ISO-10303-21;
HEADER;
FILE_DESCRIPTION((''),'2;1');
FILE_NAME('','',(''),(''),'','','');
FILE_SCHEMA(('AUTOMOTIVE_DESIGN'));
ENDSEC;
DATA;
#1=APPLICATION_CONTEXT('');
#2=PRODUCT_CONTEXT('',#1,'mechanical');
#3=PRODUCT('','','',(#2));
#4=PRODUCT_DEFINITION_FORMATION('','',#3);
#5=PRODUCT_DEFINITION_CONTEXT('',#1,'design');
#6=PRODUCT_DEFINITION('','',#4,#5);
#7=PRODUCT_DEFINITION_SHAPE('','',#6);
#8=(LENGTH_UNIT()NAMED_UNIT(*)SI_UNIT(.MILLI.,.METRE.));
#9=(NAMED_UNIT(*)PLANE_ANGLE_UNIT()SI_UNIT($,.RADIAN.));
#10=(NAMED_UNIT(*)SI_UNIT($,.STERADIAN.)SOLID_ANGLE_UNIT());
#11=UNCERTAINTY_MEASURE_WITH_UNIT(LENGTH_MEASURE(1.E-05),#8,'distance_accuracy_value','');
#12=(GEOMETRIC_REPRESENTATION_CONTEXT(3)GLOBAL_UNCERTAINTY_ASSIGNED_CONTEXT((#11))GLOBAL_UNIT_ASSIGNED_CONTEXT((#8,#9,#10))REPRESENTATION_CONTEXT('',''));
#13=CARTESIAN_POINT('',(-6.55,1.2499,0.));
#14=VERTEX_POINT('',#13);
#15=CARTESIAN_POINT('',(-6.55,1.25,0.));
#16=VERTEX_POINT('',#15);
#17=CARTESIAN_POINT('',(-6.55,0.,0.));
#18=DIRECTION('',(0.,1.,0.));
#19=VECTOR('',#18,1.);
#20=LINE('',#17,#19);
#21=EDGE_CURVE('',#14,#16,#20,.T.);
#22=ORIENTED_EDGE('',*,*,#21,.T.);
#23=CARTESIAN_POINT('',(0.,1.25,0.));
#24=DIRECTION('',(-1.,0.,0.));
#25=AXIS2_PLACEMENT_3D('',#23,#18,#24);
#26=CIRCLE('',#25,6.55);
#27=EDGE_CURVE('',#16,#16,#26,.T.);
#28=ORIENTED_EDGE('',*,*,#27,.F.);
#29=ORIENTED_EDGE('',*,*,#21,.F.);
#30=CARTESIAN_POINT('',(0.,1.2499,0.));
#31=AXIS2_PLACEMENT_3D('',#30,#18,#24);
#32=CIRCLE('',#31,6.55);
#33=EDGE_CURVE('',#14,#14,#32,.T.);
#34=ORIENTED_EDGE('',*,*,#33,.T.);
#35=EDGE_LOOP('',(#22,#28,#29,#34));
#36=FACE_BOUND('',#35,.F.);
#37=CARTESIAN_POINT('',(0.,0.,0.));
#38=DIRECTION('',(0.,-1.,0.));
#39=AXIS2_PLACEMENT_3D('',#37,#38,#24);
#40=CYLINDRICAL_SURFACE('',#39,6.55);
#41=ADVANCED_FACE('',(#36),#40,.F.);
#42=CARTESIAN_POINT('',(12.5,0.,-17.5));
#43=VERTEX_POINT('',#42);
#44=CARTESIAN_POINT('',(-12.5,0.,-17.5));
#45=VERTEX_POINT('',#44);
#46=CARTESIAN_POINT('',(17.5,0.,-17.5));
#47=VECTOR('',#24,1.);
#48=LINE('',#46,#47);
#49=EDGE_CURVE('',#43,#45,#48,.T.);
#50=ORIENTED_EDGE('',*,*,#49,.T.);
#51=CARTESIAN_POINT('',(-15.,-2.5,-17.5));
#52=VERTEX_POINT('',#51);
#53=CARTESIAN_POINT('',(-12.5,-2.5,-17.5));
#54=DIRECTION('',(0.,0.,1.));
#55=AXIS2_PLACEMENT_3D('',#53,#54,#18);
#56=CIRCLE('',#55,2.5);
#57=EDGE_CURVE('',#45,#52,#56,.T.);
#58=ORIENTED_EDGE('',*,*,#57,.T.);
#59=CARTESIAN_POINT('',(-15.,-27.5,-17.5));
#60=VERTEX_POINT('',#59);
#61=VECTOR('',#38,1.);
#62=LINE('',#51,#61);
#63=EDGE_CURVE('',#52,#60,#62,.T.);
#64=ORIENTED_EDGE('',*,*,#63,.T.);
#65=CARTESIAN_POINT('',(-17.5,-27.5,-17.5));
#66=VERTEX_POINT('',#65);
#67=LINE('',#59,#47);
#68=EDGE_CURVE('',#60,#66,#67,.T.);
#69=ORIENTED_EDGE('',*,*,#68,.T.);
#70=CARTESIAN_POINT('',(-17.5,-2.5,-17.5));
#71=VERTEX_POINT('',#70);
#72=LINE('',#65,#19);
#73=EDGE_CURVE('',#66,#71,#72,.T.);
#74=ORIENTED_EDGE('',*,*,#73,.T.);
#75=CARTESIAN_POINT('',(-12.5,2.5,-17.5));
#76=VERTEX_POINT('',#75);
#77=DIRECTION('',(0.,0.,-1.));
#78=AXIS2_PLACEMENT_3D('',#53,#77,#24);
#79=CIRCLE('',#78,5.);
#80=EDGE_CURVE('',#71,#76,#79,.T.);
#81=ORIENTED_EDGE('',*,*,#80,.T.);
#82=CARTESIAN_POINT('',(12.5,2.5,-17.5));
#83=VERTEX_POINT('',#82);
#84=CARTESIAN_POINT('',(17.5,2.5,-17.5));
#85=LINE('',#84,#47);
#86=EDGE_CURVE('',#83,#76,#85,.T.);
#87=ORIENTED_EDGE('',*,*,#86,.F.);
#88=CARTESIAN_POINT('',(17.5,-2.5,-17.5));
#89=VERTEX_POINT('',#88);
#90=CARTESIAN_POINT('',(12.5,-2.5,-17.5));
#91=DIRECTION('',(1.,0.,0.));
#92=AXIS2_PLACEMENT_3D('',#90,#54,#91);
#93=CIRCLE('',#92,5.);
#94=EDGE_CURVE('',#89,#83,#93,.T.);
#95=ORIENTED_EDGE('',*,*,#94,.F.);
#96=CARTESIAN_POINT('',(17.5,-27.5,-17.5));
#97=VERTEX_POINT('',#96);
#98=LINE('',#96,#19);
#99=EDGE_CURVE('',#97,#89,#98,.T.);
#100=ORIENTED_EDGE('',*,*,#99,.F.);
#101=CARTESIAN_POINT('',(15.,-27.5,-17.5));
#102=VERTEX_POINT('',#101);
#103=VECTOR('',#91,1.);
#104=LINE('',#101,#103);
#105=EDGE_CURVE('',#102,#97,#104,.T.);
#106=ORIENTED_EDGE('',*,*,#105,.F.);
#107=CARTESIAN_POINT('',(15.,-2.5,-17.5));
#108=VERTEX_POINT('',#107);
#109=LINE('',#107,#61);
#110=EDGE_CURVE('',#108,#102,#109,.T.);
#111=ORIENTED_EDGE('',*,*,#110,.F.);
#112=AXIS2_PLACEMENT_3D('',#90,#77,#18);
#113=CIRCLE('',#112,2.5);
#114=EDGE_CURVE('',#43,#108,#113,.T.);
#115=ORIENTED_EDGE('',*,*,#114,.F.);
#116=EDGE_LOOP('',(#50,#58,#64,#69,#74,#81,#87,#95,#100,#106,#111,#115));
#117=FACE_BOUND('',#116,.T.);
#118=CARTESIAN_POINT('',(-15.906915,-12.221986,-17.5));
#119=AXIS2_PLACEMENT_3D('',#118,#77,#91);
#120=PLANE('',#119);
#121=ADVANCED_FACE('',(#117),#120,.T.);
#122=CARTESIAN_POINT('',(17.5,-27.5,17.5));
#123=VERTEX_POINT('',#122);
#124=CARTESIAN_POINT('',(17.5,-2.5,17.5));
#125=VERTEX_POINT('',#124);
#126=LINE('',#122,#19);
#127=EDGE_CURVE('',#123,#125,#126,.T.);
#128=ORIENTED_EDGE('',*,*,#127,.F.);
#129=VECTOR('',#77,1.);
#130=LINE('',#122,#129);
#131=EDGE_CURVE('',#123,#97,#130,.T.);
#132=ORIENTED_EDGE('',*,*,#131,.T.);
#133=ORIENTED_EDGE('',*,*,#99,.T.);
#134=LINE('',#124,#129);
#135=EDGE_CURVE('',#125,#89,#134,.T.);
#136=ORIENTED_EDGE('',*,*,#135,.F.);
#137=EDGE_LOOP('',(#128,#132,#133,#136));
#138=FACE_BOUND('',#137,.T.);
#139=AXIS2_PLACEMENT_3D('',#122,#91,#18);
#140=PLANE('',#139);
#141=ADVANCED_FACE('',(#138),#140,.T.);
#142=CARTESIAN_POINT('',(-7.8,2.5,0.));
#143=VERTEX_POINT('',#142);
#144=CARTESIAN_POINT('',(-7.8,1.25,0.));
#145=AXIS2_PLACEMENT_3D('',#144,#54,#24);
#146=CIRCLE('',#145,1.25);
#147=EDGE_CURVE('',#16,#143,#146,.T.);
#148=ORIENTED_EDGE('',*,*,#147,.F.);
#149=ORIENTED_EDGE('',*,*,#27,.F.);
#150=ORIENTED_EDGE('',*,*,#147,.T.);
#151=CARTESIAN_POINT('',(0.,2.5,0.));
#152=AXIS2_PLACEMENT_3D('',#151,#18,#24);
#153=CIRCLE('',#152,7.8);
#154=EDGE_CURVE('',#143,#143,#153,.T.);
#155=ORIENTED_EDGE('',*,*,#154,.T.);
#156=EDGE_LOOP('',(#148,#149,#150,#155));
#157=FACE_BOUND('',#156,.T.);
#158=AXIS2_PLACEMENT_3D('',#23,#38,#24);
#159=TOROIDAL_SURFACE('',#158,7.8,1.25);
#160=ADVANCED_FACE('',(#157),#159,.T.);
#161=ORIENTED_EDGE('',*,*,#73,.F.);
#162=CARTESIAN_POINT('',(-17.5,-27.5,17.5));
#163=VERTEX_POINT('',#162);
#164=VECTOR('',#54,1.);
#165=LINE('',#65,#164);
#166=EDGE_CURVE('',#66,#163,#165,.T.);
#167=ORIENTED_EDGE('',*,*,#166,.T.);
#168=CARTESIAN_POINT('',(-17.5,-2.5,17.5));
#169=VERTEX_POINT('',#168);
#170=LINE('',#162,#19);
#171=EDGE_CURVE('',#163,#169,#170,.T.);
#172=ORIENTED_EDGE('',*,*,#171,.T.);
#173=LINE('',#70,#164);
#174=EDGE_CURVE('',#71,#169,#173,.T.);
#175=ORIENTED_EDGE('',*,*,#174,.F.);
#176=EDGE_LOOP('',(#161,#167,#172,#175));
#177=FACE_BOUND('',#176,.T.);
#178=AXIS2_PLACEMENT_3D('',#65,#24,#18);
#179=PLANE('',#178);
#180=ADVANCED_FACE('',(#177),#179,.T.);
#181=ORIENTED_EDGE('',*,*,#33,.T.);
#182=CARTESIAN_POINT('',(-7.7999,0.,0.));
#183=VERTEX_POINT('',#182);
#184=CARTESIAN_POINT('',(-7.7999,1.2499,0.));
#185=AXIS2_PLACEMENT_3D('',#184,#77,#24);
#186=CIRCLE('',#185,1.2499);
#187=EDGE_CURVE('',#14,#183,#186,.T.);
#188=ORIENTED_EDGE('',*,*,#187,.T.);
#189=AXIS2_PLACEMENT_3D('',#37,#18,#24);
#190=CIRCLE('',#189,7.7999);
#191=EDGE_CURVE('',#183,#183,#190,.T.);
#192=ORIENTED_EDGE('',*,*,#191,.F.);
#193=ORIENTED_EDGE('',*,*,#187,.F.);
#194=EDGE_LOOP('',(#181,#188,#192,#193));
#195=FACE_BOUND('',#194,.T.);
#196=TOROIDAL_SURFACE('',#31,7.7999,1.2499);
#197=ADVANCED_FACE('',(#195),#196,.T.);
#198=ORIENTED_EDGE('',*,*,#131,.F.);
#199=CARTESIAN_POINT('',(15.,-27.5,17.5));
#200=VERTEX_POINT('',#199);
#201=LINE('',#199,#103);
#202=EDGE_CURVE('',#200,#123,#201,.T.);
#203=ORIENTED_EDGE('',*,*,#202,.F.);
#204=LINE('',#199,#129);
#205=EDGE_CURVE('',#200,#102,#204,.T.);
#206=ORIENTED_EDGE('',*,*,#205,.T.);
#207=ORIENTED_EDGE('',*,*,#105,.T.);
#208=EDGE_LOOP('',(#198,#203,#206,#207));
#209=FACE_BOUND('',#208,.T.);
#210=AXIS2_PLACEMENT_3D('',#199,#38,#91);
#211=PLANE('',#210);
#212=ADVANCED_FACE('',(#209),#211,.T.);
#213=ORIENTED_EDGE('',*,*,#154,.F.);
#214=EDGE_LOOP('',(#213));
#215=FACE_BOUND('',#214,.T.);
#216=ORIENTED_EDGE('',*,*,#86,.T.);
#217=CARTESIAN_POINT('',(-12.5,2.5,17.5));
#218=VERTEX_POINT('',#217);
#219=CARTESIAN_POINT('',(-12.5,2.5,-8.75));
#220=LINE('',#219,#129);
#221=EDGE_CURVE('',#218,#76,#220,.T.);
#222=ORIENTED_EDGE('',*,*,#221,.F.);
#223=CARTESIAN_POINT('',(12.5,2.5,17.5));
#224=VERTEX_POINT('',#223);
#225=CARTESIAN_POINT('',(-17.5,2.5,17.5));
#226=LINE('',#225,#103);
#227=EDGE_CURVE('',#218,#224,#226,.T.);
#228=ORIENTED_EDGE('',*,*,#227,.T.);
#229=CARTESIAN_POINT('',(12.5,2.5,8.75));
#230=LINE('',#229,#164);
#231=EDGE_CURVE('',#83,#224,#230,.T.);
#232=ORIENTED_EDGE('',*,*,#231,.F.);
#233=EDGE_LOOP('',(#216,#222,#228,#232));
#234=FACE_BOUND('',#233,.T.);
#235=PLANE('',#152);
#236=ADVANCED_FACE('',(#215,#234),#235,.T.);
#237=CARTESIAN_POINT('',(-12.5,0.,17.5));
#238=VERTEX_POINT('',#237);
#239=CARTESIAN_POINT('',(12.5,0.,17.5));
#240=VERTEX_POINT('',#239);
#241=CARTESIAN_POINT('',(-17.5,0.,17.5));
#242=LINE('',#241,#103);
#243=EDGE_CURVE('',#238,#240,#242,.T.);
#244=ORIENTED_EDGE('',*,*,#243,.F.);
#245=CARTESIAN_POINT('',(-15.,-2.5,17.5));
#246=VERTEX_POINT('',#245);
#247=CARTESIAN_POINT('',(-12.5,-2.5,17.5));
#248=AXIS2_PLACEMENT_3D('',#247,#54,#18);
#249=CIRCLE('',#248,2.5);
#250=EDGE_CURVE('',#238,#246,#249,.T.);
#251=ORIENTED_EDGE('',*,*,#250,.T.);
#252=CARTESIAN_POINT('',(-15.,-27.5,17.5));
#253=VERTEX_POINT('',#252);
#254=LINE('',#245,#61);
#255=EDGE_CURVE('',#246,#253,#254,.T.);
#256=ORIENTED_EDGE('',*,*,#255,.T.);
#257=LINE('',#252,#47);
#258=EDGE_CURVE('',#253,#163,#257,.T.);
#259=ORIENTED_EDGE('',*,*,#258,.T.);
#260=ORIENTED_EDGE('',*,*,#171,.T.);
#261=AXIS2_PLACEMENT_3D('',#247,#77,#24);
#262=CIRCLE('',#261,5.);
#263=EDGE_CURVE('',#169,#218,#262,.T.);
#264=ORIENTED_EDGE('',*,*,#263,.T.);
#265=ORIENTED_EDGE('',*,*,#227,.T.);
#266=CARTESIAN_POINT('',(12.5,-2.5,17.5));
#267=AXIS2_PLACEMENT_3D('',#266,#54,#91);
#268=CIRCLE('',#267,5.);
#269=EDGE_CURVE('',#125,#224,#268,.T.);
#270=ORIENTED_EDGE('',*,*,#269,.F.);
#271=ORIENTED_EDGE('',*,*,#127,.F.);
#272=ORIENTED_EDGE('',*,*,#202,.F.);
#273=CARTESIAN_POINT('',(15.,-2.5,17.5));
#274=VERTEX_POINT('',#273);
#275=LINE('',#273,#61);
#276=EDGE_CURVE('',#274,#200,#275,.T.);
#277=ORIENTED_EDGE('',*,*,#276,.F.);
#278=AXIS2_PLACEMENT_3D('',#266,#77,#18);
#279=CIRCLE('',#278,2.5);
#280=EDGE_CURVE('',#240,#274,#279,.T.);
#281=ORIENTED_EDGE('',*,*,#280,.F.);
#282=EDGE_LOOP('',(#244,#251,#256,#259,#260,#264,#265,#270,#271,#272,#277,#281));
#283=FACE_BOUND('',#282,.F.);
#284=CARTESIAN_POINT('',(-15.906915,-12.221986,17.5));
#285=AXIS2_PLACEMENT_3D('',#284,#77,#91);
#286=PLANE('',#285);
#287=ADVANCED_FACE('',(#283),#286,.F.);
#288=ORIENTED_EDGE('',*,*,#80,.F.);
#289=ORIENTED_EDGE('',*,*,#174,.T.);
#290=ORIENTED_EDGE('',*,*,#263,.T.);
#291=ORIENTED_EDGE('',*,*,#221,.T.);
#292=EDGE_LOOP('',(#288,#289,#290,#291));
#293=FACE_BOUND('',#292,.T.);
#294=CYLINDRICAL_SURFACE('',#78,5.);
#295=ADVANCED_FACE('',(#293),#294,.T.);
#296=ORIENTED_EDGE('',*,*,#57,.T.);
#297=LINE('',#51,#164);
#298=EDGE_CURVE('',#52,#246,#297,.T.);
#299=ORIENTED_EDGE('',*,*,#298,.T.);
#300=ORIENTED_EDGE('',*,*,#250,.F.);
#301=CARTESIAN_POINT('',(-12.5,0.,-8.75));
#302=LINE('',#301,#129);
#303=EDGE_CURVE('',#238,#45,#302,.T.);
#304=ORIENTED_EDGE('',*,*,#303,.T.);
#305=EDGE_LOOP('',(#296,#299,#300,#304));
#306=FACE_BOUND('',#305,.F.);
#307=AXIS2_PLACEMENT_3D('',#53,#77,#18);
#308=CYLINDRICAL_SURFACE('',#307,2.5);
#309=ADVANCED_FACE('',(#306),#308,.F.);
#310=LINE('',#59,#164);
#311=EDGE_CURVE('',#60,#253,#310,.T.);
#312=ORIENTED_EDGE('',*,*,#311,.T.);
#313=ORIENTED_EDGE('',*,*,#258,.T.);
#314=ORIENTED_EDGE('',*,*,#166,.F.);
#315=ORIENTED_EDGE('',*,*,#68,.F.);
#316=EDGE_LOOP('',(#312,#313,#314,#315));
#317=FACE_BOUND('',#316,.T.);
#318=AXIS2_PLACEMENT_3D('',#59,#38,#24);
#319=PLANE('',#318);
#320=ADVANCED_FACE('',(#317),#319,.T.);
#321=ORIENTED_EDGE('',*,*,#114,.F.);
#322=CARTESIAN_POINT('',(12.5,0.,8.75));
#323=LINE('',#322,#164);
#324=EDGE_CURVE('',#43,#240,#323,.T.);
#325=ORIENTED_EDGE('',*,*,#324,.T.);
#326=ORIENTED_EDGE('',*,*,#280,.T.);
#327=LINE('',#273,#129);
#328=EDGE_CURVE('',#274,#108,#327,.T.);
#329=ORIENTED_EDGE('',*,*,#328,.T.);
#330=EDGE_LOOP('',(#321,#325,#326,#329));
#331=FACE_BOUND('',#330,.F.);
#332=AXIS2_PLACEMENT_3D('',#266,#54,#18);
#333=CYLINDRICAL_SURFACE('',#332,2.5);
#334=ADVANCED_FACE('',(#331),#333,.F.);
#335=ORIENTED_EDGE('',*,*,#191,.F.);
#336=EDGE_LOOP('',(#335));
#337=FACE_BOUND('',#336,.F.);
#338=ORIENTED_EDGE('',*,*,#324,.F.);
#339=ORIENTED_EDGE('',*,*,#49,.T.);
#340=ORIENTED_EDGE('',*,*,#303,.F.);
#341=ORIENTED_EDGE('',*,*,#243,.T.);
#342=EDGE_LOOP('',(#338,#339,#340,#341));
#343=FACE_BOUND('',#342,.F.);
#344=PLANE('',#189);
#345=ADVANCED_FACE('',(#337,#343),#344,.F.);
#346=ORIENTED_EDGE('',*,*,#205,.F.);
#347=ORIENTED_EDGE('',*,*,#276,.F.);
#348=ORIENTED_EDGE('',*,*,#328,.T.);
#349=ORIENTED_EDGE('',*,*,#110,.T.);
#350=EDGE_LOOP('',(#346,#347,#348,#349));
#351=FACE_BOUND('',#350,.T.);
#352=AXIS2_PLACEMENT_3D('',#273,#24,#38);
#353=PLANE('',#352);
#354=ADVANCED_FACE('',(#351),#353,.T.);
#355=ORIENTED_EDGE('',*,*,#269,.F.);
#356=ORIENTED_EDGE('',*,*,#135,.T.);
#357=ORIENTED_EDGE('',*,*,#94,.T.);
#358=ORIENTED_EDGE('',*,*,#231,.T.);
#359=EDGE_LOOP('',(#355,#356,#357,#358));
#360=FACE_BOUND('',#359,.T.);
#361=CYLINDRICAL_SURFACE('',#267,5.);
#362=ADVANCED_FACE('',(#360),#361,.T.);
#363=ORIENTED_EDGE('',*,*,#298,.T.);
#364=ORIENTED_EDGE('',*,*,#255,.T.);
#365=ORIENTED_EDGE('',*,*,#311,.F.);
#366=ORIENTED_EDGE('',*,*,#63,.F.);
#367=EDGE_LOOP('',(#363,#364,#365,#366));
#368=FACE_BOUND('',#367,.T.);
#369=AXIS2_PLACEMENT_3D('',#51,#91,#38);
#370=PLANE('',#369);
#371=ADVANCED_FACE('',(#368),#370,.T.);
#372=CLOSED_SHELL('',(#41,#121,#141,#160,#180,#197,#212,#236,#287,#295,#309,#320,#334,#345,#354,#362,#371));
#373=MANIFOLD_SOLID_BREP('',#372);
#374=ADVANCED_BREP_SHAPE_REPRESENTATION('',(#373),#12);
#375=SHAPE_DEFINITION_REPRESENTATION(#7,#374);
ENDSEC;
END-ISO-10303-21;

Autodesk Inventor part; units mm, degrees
ref_plane "YZ Plane" through (0, 0, 0) normal (1, 0, 0) x (0, 1, 0)
ref_plane "XZ Plane" through (0, 0, 0) normal (0, 1, 0) x (-1, 0, 0)
ref_plane "XY Plane" through (0, 0, 0) normal (0, 0, 1) x (1, 0, 0)
sketch "Náčrt2" plane through (0, 0, 0) normal (0, 1, 0) x (-1, 0, 0)
  line L0 (17.5, 17.5) -> (-17.5, 17.5)
  line L1 (-17.5, 17.5) -> (-17.5, -17.5)
  line L2 (-17.5, -17.5) -> (17.5, -17.5)
  line L3 (17.5, -17.5) -> (17.5, 17.5)
  circle A0 centre (0, 0) radius 6.55
  point P0 (17.5, 0)
  point P1 (0, 17.5)
  dimension "d0" = 35
  dimension "d1" = 35
  dimension "d22" = 13.1
extrude "Vysunutí1" add sketch "Náčrt2" along normal blind 2.5
sketch "Náčrt5" plane through (-15, 2.5, -17.5) normal (-1, 0, 0) x (0, -1, 0)
  line L0 (0, 35) -> (0, 0)
  line L1 (0, 0) -> (30, 0)
  line L2 (30, 0) -> (30, 35)
  line L3 (30, 35) -> (0, 35)
edge flange "Obruba2" height 30 angle 90 thickness 2.5 bend radius 2.5 thickness toward (-1, 0, 0) relief tear relief width 2.5 relief depth 1.25 corner gap 2.5 corner form 0 edges at (-17.5, 0, 0) (17.5, 0, 0) wall of the first edge with corners at (-15, 2.5, 17.5) (-15, 2.5, -17.5) (-15, -27.5, -17.5) (-15, -27.5, 17.5)
bend "Ohyb2"
corner "Roh2"
fillet "Zaoblení6" radius 1.25 1 edges at (6.55, 2.5, 0)
fillet "Zaoblení7" radius 1.25 1 edges at (6.55, 0, 0)
equation "\"d29\" = ŠířkaVýštipu"
equation "\"d30\" = HloubkaVýštipu"
equation "\"d31\" = MinimálníZbytek"
equation "\"d32\" = PoloměrOhybu"
equation "\"d35\" = PoloměrOhybu"
equation "\"d36\" = VelikostRohovéhoVýštipu"
equation "\"d37\" = VelikostMezery"
equation "\"d38\" = VelikostJacobihoPoloměru"
equation "\"PoloměrOhybu\" = Tloušťka"
equation "\"ŠířkaVýštipu\" = Tloušťka"
equation "\"HloubkaVýštipu\" = 0.5 * Tloušťka"
equation "\"MinimálníZbytek\" = 2 * Tloušťka"
equation "\"PřechodovýPoloměr\" = PoloměrOhybu"
equation "\"VelikostJacobihoPoloměru\" = PoloměrOhybu"
equation "\"VelikostMezery\" = Tloušťka"
equation "\"VelikostRohovéhoVýštipu\" = 10"
equation "\"Tloušťka\" = 2.5"
properties part number "DD_KVD_002_11" material "Nerezová ocel"
